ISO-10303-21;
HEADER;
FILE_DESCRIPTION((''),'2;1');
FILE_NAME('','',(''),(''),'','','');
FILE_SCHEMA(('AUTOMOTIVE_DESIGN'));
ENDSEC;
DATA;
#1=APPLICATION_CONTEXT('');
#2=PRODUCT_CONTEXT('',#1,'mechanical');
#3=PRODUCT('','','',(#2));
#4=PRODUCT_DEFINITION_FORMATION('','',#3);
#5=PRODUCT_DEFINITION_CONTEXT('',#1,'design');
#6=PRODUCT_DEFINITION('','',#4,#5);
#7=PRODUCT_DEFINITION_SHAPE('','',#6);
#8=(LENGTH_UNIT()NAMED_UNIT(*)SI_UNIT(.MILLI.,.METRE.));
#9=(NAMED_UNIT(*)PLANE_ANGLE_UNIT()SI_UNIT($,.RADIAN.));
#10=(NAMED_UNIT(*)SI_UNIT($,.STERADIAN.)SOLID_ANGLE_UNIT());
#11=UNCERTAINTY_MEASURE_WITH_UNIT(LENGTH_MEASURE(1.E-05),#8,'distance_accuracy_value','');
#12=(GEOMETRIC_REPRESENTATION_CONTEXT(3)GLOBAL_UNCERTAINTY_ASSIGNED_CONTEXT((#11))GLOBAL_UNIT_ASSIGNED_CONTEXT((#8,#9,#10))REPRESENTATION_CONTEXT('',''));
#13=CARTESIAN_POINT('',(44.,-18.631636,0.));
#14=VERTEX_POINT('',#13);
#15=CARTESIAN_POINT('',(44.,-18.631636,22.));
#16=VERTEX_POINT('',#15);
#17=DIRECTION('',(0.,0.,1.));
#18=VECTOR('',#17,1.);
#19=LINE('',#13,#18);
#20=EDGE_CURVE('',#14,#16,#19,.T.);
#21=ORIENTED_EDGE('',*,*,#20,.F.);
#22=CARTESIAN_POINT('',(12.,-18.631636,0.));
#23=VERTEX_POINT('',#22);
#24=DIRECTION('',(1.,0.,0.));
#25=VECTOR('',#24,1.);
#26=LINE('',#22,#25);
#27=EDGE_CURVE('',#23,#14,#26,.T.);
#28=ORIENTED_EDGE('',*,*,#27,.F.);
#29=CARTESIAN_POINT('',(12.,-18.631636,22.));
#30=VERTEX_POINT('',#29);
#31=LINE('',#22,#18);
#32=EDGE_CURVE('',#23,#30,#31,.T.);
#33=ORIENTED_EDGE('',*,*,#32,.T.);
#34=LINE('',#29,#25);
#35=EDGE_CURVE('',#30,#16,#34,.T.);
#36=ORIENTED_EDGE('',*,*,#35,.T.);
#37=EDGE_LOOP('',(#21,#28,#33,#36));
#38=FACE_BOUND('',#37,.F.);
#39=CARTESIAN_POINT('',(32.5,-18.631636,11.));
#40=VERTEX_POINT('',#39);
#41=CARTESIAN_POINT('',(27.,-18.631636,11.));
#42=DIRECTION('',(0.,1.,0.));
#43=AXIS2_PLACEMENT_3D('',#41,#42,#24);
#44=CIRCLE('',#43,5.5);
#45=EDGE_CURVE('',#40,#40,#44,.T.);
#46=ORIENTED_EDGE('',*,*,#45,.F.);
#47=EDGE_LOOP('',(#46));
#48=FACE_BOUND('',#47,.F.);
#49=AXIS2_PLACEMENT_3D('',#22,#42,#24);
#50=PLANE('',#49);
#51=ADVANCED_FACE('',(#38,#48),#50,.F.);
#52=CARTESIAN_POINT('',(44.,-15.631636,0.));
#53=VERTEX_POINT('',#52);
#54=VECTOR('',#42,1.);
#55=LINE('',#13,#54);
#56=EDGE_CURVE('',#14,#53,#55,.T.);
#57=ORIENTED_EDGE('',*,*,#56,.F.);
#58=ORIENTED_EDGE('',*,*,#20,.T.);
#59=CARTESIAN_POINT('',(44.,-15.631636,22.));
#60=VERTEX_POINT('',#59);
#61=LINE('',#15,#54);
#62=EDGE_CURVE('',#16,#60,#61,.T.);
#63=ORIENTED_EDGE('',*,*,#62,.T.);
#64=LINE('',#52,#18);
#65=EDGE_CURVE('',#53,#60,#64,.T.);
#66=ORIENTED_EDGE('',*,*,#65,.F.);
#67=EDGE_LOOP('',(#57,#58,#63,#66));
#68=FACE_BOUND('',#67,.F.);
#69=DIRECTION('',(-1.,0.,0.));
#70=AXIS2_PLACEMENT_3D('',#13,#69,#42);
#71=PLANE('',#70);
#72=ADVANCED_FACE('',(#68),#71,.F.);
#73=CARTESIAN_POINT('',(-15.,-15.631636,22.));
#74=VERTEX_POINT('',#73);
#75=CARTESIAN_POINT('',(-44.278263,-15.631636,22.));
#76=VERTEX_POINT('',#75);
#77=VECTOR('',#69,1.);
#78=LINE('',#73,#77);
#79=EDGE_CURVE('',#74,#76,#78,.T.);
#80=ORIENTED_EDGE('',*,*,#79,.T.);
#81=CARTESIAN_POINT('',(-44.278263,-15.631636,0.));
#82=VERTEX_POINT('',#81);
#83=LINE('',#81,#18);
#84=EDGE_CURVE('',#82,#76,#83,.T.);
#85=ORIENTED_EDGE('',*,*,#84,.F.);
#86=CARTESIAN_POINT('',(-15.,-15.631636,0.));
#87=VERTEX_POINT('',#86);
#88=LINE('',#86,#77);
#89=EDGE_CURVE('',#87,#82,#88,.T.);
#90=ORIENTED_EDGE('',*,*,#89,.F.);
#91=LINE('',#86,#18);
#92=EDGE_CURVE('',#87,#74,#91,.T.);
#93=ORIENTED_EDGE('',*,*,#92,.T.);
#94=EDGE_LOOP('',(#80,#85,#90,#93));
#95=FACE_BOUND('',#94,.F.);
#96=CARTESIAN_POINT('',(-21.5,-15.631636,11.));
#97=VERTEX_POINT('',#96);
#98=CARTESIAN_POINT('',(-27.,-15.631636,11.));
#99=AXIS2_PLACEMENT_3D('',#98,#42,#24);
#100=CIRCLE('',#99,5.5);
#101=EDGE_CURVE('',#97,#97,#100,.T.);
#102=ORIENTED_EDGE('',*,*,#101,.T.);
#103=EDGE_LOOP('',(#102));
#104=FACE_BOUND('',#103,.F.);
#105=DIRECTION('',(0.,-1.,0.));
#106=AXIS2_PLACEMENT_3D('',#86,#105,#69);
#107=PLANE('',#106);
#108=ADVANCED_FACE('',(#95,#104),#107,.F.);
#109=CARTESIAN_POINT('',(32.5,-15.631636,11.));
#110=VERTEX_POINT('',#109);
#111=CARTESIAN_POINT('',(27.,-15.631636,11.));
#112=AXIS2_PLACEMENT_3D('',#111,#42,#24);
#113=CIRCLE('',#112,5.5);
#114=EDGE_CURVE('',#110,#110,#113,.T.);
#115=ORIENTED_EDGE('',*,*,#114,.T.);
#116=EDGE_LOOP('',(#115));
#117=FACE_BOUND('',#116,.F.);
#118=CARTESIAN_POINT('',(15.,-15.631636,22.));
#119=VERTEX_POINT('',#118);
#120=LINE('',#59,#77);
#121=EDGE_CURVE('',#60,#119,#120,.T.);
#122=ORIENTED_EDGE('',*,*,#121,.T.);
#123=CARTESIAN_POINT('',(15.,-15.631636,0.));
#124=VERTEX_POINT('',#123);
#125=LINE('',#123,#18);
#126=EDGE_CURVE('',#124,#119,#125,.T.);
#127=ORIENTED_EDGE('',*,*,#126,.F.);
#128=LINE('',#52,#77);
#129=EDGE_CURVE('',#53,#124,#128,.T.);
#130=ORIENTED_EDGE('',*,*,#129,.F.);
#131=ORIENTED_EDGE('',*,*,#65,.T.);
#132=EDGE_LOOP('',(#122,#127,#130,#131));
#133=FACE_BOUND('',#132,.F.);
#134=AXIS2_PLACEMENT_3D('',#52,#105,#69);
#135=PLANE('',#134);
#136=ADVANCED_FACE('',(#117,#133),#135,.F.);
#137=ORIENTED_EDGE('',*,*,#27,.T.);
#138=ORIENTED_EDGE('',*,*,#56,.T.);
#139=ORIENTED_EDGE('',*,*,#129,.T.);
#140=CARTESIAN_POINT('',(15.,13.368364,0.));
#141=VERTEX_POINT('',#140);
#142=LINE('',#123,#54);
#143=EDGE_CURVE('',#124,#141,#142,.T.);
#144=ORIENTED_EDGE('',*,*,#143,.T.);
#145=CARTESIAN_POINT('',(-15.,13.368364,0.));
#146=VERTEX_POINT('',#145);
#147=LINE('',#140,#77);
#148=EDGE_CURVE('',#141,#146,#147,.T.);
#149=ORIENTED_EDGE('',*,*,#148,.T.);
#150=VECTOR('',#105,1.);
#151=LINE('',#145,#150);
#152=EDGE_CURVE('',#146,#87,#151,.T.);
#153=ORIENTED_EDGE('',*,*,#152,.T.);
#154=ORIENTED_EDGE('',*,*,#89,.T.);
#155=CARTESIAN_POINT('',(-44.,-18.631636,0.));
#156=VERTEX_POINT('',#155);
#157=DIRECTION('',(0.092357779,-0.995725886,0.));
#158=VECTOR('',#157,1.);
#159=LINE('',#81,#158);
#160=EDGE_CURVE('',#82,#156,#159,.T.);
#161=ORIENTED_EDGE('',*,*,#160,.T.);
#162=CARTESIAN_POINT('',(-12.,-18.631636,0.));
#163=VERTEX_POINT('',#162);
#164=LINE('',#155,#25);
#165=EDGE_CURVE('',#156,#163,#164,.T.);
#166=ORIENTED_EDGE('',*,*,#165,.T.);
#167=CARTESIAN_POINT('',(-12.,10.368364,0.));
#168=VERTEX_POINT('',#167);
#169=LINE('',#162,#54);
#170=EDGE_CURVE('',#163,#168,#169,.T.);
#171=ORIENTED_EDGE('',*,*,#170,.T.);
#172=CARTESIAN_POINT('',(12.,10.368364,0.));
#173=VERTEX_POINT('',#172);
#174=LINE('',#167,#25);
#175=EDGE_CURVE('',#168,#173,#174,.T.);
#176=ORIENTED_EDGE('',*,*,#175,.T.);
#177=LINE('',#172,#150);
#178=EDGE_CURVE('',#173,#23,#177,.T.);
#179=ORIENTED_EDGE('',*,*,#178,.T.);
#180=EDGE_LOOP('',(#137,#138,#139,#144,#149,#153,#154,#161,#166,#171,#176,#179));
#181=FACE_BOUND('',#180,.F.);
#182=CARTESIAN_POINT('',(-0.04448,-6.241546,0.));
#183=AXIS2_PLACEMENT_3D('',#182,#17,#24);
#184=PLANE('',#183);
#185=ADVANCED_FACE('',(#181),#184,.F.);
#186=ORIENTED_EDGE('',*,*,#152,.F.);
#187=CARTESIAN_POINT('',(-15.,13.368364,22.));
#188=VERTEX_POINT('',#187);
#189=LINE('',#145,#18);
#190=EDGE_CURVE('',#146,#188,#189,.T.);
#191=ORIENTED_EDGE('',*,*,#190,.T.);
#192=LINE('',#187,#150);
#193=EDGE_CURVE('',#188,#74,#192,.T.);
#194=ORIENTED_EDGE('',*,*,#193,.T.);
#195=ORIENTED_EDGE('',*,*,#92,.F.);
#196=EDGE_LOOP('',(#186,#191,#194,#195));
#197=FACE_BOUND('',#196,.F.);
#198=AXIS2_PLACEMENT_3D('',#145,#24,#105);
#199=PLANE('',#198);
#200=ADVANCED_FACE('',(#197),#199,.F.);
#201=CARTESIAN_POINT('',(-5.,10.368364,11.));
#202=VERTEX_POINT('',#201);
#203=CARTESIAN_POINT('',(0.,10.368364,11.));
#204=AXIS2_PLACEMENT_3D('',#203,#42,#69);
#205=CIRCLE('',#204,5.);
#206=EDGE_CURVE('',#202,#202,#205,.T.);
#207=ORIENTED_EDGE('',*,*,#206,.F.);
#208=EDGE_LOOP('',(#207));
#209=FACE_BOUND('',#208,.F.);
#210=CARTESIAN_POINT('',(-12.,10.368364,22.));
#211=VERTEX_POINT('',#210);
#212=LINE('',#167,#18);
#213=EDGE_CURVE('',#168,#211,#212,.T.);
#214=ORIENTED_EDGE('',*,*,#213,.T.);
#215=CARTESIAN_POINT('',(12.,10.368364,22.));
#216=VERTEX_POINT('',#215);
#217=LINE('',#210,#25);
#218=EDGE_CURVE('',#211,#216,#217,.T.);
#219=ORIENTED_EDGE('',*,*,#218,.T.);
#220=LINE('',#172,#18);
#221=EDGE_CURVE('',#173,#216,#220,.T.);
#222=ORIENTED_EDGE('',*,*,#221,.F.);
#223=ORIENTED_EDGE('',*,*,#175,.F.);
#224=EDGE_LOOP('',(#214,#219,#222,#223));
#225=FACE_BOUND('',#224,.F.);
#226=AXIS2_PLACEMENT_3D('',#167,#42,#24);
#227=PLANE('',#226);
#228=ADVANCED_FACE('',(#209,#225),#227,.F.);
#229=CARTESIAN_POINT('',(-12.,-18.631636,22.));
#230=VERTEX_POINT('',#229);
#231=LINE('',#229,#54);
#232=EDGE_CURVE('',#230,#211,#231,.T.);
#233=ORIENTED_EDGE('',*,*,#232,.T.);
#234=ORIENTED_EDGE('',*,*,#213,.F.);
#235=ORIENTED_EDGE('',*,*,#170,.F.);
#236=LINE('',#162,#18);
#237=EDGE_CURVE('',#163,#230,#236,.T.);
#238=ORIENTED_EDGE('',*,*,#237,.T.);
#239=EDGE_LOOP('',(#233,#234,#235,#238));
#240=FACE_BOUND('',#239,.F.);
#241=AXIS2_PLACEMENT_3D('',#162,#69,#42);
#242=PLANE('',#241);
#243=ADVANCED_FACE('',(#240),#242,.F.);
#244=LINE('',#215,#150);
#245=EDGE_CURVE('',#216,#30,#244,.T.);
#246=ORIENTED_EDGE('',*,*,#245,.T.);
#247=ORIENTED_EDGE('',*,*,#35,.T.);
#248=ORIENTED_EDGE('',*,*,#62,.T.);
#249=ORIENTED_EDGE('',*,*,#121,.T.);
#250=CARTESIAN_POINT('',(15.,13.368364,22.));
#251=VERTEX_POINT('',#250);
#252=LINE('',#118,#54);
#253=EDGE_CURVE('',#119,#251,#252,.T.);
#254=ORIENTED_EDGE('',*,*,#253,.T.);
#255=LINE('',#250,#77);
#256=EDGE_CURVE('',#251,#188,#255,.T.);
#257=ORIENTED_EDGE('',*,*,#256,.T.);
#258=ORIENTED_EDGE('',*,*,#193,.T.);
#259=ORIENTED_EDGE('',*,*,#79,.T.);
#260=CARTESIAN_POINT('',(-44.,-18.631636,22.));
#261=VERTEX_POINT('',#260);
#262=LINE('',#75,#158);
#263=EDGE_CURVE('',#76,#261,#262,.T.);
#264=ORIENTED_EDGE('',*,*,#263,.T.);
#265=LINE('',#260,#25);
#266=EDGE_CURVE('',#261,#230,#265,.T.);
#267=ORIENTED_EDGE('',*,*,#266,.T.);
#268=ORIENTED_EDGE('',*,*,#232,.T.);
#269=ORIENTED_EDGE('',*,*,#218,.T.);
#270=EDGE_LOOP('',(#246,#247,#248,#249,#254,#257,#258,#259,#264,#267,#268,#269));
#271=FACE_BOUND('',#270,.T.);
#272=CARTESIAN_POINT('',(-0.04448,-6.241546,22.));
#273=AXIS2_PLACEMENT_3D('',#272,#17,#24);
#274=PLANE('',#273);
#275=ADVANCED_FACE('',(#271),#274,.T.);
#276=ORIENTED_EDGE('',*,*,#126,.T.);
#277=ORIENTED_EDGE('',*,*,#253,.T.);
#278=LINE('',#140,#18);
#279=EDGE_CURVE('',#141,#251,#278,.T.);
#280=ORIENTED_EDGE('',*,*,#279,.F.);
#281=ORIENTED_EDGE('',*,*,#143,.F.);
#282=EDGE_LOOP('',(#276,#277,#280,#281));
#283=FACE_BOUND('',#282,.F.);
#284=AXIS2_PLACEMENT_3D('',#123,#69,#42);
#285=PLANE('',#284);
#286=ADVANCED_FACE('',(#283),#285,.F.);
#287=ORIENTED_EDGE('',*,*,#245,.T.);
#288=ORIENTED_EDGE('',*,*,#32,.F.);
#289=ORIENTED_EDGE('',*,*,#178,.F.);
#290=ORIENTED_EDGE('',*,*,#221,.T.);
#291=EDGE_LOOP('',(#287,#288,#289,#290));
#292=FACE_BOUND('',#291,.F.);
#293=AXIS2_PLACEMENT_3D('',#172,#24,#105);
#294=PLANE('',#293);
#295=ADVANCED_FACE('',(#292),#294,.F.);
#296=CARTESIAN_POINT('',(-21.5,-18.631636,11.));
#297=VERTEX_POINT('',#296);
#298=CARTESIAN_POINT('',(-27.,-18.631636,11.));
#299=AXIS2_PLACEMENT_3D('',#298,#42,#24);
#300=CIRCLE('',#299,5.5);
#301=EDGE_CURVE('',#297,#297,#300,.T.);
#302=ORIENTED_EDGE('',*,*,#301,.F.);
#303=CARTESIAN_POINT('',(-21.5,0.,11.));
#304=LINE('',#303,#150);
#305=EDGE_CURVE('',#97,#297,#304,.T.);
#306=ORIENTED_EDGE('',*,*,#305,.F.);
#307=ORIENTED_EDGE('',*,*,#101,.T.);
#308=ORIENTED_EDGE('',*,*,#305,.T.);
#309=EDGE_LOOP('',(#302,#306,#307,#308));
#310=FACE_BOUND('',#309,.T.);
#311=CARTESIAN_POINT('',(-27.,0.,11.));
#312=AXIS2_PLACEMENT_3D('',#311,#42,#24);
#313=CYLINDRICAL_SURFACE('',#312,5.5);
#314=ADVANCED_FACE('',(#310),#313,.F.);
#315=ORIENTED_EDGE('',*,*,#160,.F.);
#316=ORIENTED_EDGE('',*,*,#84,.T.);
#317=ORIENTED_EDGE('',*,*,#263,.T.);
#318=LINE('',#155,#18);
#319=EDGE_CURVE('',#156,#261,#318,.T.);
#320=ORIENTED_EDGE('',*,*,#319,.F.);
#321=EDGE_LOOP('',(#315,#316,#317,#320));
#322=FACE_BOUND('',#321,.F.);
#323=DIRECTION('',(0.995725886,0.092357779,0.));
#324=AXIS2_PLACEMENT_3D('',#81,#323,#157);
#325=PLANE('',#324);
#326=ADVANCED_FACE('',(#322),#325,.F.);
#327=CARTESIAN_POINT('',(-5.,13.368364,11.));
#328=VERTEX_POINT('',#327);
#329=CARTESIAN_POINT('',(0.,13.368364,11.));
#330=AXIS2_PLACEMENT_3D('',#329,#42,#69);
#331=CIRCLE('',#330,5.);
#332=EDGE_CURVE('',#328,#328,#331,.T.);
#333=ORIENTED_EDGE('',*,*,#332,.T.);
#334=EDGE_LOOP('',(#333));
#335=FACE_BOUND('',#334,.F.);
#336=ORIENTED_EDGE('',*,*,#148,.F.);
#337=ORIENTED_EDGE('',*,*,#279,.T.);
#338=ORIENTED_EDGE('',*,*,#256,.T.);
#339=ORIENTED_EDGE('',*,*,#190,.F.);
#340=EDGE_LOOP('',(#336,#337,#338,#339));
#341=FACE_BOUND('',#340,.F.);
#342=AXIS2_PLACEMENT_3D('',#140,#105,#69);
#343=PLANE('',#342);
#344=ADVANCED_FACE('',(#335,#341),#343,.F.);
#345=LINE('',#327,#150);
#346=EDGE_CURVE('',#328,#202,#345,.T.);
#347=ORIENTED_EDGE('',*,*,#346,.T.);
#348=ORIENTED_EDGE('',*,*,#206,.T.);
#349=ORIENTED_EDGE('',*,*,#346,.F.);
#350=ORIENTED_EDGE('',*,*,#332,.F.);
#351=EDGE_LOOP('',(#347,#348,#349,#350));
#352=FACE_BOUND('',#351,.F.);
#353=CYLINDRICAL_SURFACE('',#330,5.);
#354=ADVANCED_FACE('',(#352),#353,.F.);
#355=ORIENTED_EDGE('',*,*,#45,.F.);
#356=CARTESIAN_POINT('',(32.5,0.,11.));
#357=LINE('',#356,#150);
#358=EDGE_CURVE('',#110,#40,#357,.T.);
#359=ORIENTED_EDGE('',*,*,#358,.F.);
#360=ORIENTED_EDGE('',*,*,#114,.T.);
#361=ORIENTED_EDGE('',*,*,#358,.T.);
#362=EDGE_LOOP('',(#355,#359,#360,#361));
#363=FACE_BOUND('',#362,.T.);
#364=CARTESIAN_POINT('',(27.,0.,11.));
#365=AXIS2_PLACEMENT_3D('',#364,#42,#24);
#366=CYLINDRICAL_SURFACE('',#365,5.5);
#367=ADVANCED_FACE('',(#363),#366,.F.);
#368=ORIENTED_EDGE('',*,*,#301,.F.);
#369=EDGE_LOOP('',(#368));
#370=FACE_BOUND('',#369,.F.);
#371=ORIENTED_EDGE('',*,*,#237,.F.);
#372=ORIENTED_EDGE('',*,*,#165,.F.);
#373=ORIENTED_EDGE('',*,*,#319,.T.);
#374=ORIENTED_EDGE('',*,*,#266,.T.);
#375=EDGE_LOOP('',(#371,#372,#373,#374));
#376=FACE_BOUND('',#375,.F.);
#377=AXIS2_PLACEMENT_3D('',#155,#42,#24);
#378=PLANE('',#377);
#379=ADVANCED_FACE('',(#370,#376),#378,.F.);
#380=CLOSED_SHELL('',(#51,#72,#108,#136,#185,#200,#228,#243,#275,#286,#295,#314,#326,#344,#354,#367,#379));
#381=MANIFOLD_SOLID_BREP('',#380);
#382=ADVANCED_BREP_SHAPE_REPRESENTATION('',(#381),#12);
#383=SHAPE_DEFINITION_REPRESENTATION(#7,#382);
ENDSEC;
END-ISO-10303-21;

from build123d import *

# Parameters (mm, degrees)
F1_DEPTH = 22
F2_R     = 5
F3_DEPTH = 10
F4_R     = 5.5
F5_DEPTH = 25


# Not quite as in the source:
# - a feature names something its author has since deleted; it is built from what else it names


with BuildPart() as f1:
    # F0 (on Top) → F1 (new body)
    with BuildSketch(Plane.XY):
        Polygon((-15, -15.631636476), (-44.2782626623, -15.631636476), (-44, -18.631636476), (-12, -18.631636476), (-12, 10.368363524), (12, 10.368363524), (12, -18.631636476), (44, -18.631636476), (44, -15.631636476), (15, -15.631636476), (15, 13.368363524), (-15, 13.368363524), align=None)
    extrude(amount=F1_DEPTH)

    # F2 (on face) → F3 (cut)
    with BuildSketch(Plane(origin=(0, 13.368363524, 0), x_dir=(-1, 0, 0), z_dir=(0, 1, 0))):
        with Locations((0, 11)):
            Circle(F2_R)
    extrude(amount=-F3_DEPTH, mode=Mode.SUBTRACT)

    # F4 (on Front) → F5 (cut)
    with BuildSketch(Plane.XZ):
        with Locations((27, 11)):
            Circle(F4_R)
        with Locations((-27, 11)):
            Circle(F4_R)
    extrude(amount=F5_DEPTH, mode=Mode.SUBTRACT)


solid = f1.part
